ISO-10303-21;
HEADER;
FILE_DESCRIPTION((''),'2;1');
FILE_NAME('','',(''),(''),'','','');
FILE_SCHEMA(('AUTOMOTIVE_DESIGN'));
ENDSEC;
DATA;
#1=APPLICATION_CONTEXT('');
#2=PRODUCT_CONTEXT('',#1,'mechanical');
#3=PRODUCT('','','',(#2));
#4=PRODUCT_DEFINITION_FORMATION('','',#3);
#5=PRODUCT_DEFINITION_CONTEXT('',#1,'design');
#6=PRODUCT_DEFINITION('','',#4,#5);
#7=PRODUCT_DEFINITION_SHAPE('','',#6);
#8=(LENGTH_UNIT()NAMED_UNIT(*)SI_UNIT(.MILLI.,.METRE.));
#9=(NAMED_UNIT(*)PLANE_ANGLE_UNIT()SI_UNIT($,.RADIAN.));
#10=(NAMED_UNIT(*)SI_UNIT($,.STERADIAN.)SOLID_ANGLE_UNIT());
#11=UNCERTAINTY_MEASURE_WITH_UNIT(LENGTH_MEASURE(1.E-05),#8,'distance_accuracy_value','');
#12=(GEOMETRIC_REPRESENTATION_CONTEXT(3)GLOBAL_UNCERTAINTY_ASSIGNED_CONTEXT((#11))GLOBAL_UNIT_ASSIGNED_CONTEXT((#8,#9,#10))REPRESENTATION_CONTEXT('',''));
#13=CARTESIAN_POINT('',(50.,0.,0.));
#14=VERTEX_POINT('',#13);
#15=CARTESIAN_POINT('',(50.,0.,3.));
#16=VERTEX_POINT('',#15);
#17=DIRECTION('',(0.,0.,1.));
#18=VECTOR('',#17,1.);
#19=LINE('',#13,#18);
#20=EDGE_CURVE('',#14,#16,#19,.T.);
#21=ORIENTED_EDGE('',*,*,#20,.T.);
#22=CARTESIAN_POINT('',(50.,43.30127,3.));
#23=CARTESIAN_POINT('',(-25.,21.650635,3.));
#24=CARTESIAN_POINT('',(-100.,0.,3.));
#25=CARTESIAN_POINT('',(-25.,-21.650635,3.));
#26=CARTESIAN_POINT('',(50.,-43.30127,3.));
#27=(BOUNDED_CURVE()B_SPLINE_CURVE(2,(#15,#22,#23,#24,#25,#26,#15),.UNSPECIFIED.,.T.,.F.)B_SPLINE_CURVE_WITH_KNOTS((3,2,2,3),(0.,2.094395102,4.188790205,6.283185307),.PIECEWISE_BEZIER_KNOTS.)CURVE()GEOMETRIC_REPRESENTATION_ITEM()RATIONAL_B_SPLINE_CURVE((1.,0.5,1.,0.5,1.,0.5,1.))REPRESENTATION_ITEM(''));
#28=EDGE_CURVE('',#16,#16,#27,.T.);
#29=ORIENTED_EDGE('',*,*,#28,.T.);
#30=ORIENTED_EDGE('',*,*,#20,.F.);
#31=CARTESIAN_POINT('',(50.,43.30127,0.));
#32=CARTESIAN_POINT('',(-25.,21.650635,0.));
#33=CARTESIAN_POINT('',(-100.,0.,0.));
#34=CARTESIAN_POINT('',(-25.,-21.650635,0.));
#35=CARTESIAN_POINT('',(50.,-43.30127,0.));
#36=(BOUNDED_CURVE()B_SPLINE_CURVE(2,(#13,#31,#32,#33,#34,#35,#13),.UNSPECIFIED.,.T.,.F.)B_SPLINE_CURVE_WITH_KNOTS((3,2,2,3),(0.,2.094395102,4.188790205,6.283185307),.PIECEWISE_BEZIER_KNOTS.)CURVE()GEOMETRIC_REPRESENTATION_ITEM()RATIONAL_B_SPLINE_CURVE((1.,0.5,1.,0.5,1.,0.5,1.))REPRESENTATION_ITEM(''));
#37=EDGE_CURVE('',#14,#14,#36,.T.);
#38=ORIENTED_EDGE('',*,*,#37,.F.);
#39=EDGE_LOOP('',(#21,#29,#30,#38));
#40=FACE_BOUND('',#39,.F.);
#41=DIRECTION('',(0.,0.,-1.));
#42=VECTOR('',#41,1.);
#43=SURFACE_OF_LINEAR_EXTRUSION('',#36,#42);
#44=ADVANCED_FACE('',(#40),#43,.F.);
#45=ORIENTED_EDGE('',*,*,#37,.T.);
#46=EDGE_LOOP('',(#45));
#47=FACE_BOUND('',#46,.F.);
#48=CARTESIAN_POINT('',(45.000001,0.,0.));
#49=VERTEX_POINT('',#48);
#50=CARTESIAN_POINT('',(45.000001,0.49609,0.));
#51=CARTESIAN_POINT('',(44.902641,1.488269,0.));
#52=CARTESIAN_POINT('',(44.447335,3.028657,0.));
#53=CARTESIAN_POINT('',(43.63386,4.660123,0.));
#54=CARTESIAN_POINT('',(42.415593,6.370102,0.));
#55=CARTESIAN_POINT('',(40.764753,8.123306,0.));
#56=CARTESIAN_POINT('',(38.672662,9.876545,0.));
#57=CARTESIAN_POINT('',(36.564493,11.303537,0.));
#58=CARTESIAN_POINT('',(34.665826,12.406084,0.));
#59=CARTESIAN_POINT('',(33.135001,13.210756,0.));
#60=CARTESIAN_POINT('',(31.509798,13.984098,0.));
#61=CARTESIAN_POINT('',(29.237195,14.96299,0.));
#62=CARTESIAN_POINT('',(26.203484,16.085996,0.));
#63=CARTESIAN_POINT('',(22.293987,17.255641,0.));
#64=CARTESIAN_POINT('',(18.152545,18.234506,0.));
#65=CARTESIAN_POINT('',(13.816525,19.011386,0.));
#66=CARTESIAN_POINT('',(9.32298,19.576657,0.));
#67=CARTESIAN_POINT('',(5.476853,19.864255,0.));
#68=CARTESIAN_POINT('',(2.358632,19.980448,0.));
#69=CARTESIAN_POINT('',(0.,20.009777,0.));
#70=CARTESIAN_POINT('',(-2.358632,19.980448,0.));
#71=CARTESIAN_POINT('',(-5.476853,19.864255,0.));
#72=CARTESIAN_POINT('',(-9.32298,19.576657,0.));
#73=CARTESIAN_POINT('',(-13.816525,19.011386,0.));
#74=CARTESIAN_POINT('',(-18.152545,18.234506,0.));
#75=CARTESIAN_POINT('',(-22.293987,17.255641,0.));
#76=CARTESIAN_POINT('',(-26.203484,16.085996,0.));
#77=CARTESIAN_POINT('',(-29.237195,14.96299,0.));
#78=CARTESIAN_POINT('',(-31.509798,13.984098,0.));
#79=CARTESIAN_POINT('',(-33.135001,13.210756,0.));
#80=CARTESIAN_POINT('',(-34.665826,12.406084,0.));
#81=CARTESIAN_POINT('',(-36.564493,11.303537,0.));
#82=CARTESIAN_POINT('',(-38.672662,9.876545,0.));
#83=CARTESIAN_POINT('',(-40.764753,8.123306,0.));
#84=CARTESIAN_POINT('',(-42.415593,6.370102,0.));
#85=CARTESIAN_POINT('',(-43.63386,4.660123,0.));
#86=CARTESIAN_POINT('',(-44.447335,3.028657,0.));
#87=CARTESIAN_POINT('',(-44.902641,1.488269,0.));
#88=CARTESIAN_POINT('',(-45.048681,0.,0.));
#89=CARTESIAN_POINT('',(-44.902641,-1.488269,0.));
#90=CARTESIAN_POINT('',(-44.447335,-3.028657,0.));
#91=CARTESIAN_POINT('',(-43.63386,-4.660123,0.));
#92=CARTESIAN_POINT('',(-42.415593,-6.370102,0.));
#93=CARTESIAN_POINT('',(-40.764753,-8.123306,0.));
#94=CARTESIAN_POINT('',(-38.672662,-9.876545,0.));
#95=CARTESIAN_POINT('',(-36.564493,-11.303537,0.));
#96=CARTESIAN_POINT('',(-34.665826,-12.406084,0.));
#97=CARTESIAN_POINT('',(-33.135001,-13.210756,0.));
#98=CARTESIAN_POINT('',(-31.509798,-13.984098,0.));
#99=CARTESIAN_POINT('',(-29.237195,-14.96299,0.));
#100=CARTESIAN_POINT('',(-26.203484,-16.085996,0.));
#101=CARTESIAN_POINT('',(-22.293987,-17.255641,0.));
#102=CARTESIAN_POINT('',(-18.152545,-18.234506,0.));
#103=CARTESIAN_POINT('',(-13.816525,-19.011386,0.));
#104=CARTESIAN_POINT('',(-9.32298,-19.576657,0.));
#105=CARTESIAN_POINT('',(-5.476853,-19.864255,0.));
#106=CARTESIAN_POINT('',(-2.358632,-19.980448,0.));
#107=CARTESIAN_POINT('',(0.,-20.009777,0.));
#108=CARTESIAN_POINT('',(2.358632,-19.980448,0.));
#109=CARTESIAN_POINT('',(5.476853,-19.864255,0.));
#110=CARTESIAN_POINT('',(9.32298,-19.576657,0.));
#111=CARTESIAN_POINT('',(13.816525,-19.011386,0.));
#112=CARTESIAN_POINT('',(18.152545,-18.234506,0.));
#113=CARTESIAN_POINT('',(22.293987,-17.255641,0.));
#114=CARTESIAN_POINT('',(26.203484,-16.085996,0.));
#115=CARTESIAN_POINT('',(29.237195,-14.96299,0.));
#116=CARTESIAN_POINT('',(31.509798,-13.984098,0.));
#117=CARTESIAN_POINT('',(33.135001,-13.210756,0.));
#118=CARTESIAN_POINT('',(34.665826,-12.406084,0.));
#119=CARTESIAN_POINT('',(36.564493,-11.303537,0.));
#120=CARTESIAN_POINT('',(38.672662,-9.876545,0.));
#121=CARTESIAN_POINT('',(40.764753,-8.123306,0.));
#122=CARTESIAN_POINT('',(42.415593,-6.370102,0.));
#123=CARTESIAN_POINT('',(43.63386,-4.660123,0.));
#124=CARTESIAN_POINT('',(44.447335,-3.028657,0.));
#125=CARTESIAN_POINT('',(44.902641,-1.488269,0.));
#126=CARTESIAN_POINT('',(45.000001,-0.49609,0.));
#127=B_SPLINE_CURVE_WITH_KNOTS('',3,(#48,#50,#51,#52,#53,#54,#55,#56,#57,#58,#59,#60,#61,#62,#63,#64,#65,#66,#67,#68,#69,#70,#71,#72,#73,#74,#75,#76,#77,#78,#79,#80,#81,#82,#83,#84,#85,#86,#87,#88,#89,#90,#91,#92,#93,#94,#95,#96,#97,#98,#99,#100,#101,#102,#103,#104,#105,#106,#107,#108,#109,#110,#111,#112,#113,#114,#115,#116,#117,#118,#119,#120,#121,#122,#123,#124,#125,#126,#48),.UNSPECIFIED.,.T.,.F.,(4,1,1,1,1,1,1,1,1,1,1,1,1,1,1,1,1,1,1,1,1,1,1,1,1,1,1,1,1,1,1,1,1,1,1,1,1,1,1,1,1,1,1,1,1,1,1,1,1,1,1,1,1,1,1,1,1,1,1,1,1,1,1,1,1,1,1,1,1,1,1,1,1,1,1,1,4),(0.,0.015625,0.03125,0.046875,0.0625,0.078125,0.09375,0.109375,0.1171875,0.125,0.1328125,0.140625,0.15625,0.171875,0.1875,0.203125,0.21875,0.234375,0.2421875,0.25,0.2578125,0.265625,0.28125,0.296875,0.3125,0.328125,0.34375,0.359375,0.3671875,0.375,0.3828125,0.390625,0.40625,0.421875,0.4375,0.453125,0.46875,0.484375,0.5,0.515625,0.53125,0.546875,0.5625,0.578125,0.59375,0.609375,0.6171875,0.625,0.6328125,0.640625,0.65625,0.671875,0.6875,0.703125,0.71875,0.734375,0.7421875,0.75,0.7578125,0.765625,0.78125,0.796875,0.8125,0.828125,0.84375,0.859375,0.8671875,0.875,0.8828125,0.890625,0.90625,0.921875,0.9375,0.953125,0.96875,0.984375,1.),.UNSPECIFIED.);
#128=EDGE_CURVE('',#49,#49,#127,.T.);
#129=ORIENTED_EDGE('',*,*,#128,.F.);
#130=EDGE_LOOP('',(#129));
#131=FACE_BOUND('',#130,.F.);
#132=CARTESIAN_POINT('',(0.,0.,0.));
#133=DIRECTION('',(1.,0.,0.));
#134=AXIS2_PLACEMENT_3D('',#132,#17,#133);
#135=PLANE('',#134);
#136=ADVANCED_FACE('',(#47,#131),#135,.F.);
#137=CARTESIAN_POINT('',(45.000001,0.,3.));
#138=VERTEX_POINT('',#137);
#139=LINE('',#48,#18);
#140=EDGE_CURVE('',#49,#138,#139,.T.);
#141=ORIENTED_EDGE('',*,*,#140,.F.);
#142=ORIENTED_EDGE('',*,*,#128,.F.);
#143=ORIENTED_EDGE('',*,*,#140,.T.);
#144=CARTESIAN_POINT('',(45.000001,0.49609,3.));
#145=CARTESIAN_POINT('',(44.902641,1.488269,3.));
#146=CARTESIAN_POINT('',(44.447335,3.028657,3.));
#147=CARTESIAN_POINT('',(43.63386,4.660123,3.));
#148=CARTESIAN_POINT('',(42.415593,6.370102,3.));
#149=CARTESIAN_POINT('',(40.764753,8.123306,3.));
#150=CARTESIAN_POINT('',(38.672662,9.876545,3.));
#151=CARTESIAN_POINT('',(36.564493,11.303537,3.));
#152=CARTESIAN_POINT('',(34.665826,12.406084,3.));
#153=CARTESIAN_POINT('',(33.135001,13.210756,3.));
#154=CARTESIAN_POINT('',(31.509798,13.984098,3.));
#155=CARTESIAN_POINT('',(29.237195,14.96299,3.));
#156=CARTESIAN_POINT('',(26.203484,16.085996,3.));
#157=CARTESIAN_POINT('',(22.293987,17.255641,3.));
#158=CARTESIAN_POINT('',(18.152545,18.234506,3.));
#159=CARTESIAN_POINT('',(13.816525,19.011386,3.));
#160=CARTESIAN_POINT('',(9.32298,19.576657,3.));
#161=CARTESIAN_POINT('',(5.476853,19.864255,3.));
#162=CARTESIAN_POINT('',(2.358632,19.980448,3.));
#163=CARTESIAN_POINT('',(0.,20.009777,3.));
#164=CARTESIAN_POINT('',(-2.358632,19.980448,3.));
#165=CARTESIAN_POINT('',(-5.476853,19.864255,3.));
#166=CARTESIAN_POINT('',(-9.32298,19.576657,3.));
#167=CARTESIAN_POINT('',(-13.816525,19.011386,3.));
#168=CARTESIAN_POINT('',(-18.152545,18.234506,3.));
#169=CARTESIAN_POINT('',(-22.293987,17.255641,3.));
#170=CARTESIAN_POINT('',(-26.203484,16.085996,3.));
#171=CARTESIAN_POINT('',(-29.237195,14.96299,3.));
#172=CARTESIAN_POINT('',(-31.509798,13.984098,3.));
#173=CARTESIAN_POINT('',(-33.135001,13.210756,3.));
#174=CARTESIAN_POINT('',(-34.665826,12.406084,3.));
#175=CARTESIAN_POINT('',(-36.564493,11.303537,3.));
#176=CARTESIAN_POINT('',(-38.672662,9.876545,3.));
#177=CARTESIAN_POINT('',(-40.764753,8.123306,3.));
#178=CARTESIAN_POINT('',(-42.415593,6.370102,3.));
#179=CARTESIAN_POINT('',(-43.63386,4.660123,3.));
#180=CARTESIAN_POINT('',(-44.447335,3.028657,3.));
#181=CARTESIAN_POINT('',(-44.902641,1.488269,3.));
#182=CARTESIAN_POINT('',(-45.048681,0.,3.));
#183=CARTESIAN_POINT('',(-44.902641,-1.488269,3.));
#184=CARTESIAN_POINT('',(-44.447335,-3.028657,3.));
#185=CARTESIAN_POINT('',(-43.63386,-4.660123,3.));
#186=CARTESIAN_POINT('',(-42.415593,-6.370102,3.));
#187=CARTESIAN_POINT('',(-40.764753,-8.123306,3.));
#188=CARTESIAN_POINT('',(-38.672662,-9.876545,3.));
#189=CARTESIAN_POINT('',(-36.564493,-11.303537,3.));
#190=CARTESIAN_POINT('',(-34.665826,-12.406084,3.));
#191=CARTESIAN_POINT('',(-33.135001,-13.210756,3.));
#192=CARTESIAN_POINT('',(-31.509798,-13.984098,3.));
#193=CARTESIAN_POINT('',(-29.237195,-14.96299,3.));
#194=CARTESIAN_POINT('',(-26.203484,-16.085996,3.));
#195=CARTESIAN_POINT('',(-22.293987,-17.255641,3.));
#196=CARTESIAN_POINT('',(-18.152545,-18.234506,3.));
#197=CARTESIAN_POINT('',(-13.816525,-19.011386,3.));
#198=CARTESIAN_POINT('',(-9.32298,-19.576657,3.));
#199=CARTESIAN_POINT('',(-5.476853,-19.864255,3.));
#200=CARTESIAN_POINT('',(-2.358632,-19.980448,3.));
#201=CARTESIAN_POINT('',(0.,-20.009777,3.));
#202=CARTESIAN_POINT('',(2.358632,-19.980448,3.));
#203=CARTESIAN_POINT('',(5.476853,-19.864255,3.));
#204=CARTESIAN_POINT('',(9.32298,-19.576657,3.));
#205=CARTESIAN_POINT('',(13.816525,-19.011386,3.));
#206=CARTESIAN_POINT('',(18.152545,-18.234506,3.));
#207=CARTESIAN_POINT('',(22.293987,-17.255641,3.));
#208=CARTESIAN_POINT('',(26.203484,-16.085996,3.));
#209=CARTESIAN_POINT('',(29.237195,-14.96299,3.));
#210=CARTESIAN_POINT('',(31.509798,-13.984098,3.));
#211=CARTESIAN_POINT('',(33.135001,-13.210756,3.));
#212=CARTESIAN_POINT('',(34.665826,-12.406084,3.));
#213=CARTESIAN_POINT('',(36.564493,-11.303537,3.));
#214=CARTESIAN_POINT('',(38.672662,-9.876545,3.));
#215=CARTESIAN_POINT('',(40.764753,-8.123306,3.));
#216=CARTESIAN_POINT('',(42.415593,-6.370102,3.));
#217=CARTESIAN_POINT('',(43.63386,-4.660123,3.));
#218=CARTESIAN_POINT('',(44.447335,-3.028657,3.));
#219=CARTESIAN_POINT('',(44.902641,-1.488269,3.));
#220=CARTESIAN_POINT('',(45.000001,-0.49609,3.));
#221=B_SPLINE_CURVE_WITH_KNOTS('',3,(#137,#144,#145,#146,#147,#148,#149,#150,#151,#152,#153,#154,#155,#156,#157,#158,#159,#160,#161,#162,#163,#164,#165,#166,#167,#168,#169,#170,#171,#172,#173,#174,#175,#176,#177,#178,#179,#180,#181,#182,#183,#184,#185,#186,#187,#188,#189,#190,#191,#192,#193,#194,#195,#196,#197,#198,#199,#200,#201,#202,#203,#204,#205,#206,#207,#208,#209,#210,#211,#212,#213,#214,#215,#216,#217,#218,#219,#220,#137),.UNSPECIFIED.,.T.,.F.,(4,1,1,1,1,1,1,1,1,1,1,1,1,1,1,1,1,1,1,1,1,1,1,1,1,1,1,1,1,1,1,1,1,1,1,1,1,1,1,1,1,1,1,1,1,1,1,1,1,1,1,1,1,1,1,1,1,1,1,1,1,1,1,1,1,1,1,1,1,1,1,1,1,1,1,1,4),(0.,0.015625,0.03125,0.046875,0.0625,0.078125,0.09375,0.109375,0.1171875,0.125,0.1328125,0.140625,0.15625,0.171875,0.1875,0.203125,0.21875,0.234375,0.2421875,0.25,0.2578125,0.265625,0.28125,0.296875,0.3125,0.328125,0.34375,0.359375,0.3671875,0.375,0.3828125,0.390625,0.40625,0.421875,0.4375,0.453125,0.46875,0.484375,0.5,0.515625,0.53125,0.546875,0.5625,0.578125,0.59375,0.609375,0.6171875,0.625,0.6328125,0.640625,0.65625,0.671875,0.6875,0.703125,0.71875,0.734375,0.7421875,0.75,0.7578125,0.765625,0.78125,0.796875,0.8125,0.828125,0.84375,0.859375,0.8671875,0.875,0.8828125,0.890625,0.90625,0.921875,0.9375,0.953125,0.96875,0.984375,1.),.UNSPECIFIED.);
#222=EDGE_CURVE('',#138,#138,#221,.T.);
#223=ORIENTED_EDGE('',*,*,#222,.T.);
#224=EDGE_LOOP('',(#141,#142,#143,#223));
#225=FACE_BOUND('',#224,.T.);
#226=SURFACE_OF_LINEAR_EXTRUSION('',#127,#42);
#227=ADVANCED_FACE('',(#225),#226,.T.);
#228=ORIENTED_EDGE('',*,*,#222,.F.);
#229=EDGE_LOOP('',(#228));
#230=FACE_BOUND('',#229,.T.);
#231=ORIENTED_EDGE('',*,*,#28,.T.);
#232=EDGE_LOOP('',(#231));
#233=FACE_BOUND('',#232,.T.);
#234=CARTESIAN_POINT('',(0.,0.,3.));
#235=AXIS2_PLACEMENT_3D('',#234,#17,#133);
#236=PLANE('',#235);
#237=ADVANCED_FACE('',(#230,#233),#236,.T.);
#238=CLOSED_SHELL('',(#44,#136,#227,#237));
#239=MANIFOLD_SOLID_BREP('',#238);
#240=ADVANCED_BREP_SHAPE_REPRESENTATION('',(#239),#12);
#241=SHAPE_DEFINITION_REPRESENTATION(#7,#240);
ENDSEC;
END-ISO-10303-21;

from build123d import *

# Parameters (mm, degrees)
F1_DEPTH = 3


# Not quite as in the source:
# - the dataset's text gives a spline's control points without its knots; the knots are read off the source's solid


with BuildPart() as f1:
    # F0 (on Top) → F1 (new body)
    with BuildSketch(Plane.XY):
        with BuildLine():
            add(Edge.make_bspline(
                [(50, 0), (50, 43.3012701892), (-25, 21.6506350946), (-100, 0), (-25, -21.6506350946), (50, -43.3012701892), (50, 0)],
                knots=[0, 0, 0, 2.0943951024, 2.0943951024, 4.1887902048, 4.1887902048, 6.2831853072, 6.2831853072, 6.2831853072], degree=2, weights=[1, 0.5, 1, 0.5, 1, 0.5, 1]))
        make_face()
        with BuildLine():
            add(Edge.make_bspline(
                [(45.0000010431, 0), (45.0000010431, 0.4960895654), (44.9026405083, 1.4882686963), (44.4473354541, 3.028657329), (43.6338599659, 4.6601234969), (42.4155925881, 6.3701016273), (40.7647525973, 8.1233059984), (38.6726616823, 9.8765449972), (36.5644927344, 11.3035371766), (34.6658260132, 12.4060836573), (33.1350012637, 13.2107562875), (31.5097982219, 13.9840982386), (29.2371951304, 14.9629903055), (26.2034839847, 16.0859961387), (22.2939870458, 17.2556411081), (18.1525453136, 18.2345058178), (13.8165250474, 19.0113864007), (9.3229798868, 19.5766567228), (5.4768533159, 19.8642554217), (2.3586315208, 19.9804484511), (0, 20.0097773391), (-2.3586315208, 19.9804484511), (-5.4768533159, 19.8642554217), (-9.3229798868, 19.5766567228), (-13.8165250474, 19.0113864007), (-18.1525453136, 18.2345058178), (-22.2939870458, 17.2556411081), (-26.2034839847, 16.0859961387), (-29.2371951304, 14.9629903055), (-31.5097982219, 13.9840982386), (-33.1350012637, 13.2107562875), (-34.6658260132, 12.4060836573), (-36.5644927344, 11.3035371766), (-38.6726616823, 9.8765449972), (-40.7647525973, 8.1233059984), (-42.4155925881, 6.3701016273), (-43.6338599659, 4.6601234969), (-44.4473354541, 3.028657329), (-44.9026405083, 1.4882686963), (-45.0486813105, 0), (-44.9026405083, -1.4882686963), (-44.4473354541, -3.028657329), (-43.6338599659, -4.6601234969), (-42.4155925881, -6.3701016273), (-40.7647525973, -8.1233059984), (-38.6726616823, -9.8765449972), (-36.5644927344, -11.3035371766), (-34.6658260132, -12.4060836573), (-33.1350012637, -13.2107562875), (-31.5097982219, -13.9840982386), (-29.2371951304, -14.9629903055), (-26.2034839847, -16.0859961387), (-22.2939870458, -17.2556411081), (-18.1525453136, -18.2345058178), (-13.8165250474, -19.0113864007), (-9.3229798868, -19.5766567228), (-5.4768533159, -19.8642554217), (-2.3586315208, -19.9804484511), (0, -20.0097773391), (2.3586315208, -19.9804484511), (5.4768533159, -19.8642554217), (9.3229798868, -19.5766567228), (13.8165250474, -19.0113864007), (18.1525453136, -18.2345058178), (22.2939870458, -17.2556411081), (26.2034839847, -16.0859961387), (29.2371951304, -14.9629903055), (31.5097982219, -13.9840982386), (33.1350012637, -13.2107562875), (34.6658260132, -12.4060836573), (36.5644927344, -11.3035371766), (38.6726616823, -9.8765449972), (40.7647525973, -8.1233059984), (42.4155925881, -6.3701016273), (43.6338599659, -4.6601234969), (44.4473354541, -3.028657329), (44.9026405083, -1.4882686963), (45.0000010431, -0.4960895654), (45.0000010431, 0)],
                knots=[0, 0, 0, 0, 0.015625, 0.03125, 0.046875, 0.0625, 0.078125, 0.09375, 0.109375, 0.1171875, 0.125, 0.1328125, 0.140625, 0.15625, 0.171875, 0.1875, 0.203125, 0.21875, 0.234375, 0.2421875, 0.25, 0.2578125, 0.265625, 0.28125, 0.296875, 0.3125, 0.328125, 0.34375, 0.359375, 0.3671875, 0.375, 0.3828125, 0.390625, 0.40625, 0.421875, 0.4375, 0.453125, 0.46875, 0.484375, 0.5, 0.515625, 0.53125, 0.546875, 0.5625, 0.578125, 0.59375, 0.609375, 0.6171875, 0.625, 0.6328125, 0.640625, 0.65625, 0.671875, 0.6875, 0.703125, 0.71875, 0.734375, 0.7421875, 0.75, 0.7578125, 0.765625, 0.78125, 0.796875, 0.8125, 0.828125, 0.84375, 0.859375, 0.8671875, 0.875, 0.8828125, 0.890625, 0.90625, 0.921875, 0.9375, 0.953125, 0.96875, 0.984375, 1, 1, 1, 1], degree=3))
        make_face(mode=Mode.SUBTRACT)
    extrude(amount=F1_DEPTH)


solid = f1.part
